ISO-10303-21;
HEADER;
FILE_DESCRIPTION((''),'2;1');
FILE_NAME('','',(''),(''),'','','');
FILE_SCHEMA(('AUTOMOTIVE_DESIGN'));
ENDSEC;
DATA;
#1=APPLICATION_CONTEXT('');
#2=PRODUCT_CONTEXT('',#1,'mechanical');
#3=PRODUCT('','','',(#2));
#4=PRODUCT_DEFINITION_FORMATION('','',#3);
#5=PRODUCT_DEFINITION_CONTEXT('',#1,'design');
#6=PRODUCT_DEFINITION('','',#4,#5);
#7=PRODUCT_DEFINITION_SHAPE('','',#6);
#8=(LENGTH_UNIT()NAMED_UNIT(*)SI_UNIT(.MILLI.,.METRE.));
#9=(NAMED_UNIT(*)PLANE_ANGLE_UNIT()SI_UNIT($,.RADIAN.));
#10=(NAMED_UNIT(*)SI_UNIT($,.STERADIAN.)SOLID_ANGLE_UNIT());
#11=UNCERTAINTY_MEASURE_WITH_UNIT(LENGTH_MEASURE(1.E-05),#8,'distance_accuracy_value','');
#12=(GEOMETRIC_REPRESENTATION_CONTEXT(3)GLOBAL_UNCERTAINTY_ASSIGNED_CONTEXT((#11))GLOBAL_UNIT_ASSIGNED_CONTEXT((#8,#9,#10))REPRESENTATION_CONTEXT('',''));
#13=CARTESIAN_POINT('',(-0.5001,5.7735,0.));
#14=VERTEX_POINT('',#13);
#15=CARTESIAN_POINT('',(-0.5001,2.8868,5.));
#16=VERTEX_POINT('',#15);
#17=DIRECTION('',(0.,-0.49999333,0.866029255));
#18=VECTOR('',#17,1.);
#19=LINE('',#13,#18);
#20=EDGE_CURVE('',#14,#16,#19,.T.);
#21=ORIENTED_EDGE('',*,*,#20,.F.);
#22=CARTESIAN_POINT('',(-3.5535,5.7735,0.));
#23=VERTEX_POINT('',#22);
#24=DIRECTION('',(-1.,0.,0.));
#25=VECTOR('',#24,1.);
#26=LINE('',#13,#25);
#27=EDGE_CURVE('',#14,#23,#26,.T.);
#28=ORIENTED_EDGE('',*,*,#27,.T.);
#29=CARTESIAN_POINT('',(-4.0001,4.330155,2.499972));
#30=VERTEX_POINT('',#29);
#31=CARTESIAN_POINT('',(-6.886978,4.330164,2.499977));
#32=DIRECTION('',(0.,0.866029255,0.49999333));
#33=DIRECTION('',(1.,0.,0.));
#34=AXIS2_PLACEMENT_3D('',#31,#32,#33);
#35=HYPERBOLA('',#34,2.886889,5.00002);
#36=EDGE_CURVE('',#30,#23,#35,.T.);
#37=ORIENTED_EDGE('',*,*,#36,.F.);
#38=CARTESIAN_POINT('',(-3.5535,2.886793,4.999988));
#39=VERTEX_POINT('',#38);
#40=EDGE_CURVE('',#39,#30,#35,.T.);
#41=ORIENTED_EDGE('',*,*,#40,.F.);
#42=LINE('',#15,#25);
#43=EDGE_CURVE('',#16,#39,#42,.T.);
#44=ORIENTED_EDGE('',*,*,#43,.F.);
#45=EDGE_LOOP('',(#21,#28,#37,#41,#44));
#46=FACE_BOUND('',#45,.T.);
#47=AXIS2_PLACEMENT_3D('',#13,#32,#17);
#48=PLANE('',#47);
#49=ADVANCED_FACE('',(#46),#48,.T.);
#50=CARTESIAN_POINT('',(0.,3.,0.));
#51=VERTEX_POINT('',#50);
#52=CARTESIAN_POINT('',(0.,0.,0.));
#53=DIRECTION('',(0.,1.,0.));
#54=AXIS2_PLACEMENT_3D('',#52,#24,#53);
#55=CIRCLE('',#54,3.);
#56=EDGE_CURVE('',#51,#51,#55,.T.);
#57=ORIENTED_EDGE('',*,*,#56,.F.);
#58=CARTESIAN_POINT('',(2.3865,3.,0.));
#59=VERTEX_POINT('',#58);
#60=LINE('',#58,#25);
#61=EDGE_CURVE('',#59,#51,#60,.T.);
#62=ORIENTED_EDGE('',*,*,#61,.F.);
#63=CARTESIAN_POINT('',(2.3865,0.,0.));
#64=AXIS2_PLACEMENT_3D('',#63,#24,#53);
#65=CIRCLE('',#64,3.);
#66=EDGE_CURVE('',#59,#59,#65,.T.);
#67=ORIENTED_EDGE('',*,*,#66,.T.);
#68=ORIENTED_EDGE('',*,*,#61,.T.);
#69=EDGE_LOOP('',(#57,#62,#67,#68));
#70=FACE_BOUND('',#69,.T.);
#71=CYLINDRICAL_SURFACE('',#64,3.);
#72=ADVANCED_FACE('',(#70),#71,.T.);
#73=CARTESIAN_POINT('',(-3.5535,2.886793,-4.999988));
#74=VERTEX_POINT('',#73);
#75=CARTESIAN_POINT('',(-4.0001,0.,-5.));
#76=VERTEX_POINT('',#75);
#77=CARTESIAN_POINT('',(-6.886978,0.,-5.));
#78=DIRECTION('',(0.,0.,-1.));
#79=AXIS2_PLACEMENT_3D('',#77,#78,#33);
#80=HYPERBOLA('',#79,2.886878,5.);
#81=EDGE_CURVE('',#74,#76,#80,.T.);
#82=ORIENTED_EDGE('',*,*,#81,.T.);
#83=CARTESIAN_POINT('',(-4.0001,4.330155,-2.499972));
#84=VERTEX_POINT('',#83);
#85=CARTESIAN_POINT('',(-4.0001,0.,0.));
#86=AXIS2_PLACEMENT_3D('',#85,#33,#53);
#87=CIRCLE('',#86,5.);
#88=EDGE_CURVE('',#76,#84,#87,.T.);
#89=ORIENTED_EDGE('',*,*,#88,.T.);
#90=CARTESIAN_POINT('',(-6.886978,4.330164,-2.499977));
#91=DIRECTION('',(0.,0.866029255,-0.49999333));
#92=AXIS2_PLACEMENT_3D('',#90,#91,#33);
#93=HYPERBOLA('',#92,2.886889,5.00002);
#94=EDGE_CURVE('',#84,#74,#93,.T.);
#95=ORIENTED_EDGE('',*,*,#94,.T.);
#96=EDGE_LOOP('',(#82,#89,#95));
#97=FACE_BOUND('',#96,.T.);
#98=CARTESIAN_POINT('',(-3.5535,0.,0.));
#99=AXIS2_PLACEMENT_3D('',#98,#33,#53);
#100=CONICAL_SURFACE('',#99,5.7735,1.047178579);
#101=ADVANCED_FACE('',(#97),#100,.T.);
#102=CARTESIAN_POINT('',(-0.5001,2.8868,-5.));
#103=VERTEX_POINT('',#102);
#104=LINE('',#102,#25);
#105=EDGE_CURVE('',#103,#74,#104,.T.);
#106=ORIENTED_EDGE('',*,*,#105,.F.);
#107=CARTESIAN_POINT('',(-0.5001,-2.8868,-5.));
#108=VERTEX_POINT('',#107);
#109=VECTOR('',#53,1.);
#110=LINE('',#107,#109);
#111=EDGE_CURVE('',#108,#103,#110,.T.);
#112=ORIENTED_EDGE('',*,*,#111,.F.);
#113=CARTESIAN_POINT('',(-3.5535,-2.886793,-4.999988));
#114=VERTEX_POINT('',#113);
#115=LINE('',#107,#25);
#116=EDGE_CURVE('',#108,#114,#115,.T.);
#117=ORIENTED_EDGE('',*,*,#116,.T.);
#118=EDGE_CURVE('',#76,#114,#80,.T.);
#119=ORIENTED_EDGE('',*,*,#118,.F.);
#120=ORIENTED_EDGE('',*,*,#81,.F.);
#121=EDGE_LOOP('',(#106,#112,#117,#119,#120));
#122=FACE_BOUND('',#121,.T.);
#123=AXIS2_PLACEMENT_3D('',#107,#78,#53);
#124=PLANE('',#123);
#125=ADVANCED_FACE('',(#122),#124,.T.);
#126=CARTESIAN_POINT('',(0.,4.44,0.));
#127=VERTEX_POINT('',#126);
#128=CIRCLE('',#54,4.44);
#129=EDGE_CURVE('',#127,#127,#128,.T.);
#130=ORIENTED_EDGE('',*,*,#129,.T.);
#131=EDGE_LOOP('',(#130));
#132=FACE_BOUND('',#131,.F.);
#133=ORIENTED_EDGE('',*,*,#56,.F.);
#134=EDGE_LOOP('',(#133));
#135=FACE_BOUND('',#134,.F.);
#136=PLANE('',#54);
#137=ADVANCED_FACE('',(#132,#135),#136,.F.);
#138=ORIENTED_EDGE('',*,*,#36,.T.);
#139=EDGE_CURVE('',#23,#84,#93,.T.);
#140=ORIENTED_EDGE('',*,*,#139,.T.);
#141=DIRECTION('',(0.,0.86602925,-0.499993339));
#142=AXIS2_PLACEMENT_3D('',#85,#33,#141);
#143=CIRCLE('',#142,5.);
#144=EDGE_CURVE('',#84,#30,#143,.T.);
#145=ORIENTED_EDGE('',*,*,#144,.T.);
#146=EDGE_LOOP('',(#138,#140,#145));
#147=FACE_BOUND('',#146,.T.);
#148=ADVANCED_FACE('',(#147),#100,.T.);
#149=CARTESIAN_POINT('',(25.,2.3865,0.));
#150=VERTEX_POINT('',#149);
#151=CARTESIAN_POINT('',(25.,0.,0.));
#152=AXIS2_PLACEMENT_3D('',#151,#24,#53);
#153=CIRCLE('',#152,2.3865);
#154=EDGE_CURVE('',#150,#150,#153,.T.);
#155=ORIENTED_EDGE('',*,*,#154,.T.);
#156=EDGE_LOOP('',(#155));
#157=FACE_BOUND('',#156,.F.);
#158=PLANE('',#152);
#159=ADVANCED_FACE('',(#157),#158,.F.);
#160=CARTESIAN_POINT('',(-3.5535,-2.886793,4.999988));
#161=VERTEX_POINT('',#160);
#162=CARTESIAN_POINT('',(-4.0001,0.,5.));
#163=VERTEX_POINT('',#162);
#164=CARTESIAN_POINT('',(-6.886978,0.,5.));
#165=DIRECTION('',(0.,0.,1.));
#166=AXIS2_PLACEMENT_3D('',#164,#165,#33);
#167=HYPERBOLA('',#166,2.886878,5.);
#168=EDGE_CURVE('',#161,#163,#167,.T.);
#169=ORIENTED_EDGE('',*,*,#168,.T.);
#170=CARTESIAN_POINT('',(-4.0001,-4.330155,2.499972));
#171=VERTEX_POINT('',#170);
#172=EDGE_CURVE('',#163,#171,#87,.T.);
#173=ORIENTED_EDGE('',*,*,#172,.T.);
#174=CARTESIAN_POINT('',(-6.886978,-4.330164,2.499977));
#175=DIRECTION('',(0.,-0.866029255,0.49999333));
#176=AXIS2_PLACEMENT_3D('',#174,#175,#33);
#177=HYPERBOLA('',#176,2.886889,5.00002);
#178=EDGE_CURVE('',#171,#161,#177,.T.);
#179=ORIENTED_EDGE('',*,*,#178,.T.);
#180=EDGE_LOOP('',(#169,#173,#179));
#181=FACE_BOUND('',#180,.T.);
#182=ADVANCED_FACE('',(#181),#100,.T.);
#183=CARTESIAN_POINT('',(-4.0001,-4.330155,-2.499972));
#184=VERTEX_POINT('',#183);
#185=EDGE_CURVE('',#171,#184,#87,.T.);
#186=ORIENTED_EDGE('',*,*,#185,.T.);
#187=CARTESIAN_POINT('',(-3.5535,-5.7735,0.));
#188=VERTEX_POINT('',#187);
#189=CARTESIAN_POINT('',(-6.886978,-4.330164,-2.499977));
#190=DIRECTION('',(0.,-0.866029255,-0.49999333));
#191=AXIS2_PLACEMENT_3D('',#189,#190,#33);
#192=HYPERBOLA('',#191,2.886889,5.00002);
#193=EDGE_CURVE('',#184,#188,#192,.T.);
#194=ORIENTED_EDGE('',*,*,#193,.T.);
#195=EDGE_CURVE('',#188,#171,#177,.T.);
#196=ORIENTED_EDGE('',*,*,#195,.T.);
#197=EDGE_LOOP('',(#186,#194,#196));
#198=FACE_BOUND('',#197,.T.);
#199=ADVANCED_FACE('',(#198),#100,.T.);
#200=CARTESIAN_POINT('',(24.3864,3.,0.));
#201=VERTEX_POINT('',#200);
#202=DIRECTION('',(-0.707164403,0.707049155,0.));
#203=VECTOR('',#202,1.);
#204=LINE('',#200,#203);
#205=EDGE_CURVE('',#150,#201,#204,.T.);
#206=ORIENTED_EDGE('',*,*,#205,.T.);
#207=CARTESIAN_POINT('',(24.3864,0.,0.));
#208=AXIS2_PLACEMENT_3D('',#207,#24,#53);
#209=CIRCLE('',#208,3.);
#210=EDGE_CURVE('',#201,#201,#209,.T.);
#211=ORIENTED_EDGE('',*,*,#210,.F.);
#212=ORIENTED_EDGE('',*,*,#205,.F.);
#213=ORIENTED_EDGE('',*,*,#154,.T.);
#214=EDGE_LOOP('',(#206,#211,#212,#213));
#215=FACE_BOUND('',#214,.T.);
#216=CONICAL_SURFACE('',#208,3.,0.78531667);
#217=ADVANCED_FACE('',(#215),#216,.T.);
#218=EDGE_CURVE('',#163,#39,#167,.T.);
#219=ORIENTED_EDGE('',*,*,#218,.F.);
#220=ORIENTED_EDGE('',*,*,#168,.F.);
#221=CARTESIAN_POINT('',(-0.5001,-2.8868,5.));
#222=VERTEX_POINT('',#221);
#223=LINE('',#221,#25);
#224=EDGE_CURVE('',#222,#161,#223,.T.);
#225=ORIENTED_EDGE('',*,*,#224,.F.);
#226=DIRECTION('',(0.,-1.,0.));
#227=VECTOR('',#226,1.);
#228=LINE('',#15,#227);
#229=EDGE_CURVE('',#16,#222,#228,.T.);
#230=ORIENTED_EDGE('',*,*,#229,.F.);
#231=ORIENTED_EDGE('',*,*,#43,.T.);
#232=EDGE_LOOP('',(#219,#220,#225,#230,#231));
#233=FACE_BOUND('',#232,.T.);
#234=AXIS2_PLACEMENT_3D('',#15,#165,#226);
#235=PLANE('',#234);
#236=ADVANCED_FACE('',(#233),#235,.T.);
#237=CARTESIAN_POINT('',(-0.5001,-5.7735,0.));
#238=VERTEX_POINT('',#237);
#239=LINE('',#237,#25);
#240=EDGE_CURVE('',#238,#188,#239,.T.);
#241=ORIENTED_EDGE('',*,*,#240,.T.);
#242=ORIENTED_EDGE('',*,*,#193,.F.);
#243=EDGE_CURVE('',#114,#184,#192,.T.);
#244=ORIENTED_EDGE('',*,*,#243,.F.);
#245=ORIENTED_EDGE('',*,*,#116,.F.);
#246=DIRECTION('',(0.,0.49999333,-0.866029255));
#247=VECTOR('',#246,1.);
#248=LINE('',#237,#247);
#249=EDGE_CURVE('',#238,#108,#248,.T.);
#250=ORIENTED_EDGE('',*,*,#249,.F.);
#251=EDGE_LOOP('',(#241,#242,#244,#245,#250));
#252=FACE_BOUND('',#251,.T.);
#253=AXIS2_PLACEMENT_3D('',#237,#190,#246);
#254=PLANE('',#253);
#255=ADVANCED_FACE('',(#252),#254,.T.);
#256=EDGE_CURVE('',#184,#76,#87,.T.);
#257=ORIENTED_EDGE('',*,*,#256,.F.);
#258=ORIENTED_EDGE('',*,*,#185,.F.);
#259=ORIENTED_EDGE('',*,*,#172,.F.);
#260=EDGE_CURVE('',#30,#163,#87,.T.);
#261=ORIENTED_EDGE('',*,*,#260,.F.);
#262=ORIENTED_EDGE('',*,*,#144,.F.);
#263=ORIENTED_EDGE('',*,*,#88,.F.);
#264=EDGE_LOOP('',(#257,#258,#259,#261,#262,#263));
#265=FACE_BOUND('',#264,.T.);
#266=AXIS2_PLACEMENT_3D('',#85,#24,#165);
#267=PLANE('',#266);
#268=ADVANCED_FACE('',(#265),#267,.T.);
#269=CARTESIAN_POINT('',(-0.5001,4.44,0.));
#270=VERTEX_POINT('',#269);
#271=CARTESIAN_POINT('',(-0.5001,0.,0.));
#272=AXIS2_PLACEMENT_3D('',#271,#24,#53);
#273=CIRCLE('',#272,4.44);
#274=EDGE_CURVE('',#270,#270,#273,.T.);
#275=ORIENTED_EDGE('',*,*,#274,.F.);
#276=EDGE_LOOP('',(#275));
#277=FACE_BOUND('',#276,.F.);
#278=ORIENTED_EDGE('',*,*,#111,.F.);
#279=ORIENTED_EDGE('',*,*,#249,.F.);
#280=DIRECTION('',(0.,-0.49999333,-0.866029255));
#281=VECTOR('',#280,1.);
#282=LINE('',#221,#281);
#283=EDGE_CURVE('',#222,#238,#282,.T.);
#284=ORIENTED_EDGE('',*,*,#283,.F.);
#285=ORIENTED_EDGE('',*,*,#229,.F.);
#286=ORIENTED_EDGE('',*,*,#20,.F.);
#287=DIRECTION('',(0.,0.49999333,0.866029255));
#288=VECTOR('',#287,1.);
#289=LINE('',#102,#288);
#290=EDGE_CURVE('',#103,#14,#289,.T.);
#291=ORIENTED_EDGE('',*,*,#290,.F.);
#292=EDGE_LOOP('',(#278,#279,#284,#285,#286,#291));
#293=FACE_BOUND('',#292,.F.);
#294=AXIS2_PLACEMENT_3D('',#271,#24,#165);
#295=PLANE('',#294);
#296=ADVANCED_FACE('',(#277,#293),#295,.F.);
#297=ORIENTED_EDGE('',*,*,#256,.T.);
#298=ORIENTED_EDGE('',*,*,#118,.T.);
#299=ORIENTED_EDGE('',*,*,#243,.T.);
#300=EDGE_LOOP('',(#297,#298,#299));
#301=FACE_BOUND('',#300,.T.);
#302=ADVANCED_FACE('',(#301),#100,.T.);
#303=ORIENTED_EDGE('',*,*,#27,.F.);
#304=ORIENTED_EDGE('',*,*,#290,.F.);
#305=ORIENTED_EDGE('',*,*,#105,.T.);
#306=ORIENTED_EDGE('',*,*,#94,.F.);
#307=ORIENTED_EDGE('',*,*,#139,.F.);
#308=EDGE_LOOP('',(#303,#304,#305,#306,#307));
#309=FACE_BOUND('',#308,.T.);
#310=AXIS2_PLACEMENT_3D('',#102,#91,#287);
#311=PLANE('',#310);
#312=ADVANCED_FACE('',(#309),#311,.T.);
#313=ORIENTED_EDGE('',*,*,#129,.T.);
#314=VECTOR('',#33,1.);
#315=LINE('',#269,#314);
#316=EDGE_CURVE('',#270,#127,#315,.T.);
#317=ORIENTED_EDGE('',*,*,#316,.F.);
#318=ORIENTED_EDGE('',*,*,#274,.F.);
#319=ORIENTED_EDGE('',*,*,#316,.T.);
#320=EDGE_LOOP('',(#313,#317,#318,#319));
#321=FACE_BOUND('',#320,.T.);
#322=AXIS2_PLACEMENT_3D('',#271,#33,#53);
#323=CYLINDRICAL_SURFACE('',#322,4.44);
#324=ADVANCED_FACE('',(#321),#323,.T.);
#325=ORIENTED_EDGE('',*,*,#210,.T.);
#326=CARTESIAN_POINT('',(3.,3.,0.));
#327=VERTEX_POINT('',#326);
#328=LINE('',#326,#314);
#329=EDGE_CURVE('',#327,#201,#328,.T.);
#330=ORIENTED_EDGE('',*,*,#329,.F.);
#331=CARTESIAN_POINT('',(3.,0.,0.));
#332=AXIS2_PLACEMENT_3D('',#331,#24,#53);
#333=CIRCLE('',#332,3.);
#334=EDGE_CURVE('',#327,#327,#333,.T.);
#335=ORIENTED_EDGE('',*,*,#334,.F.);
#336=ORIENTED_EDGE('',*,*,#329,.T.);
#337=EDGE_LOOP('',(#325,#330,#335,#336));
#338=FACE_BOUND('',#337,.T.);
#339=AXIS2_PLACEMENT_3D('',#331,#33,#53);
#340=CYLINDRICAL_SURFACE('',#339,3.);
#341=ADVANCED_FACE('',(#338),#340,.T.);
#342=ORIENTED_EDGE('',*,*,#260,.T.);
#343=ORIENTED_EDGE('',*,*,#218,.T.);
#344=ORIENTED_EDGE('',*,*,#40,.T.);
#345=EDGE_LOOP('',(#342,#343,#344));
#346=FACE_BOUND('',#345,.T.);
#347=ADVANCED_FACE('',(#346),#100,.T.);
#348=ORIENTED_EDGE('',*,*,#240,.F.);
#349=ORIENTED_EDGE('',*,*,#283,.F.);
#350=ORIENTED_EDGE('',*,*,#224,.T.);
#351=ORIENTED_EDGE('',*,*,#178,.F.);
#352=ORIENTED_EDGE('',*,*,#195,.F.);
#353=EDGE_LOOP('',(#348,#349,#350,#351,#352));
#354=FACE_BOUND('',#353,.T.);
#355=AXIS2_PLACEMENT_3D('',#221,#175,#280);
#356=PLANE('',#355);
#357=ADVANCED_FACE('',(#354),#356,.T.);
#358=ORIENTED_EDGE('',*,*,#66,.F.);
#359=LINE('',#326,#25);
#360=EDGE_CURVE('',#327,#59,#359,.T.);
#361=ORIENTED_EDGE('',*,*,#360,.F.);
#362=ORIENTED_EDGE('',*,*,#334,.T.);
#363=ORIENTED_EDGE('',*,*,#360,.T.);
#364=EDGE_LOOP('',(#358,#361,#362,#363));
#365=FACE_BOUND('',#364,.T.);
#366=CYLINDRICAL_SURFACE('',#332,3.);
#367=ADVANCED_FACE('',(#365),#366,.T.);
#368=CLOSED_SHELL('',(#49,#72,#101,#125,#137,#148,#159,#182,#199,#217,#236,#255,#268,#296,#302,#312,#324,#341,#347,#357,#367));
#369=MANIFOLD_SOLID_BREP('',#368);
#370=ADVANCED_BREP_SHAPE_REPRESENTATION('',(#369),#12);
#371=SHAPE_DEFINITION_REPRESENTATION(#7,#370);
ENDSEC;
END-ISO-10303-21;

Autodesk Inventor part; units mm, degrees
ref_plane "YZ Plane" through (0, 0, 0) normal (1, 0, 0) x (0, 1, 0)
ref_plane "XZ Plane" through (0, 0, 0) normal (0, 1, 0) x (-1, 0, 0)
sketch "Sketch1" plane through (0, 0, 0) normal (0, 0, 1) x (1, 0, 0)
  line L0 (0, 4.44) -> (0, 3)
  line L1 (3, 3) -> (25, 3)
  line L2 (25, 3) -> (25, 0)
  line L3 (25, 0) -> (-0.5001, 0)
  line L4 (-5.6001, 0) -> (30.1, 0) projected
  line L5 (-0.5001, 0) -> (-0.5001, 4.44)
  line L6 (-0.5001, 4.44) -> (0, 4.44)
  line L7 (3, 3) -> (2.3865, 3)
  line L8 (2.3865, 3) -> (0, 3)
  line L9 (0, -0.888) -> (0, 5.328) projected
  dimension "d0" = 25
  dimension "d1" = 22
  dimension "d2" = 6
  dimension "d9" = 0.5001
  dimension "d10" = 8.88
  dimension "d13" = 0.6136
  dimension "d14" = 6
revolve "Body" add sketch "Sketch1" angle 360 about axis through (25, 0, 0) along (-1, 0, 0)
sketch "Sketch2" plane through (-0.5001, 0, 0) normal (-1, 0, 0) x (0, 0, 1)
  line L0 (0, 5.7735) -> (5, 2.8868)
  line L1 (5, 2.8868) -> (5, -2.8868)
  line L2 (5, -2.8868) -> (0, -5.7735)
  line L3 (0, -5.7735) -> (-5, -2.8868)
  line L4 (-5, -2.8868) -> (-5, 2.8868)
  line L5 (-5, 2.8868) -> (0, 5.7735)
  point P0 (0, 0)
  point P1 (0, 0)
  dimension "d11" = 10
extrude "Head" add sketch "Sketch2" along normal blind 3.5
sketch "Sketch4" plane through (0, 0, 0) normal (0, 0, 1) x (1, 0, 0)
  line L0 (-4.0001, 5) -> (-4.0001, 5.7735)
  line L1 (-4.0001, 5.7735) -> (-3.5535, 5.7735)
  line L2 (-3.5535, 5.7735) -> (-4.0001, 5)
  line L3 (-4.7001, 0) -> (0.1999, 0) projected
  line L4 (-0.5001, 5.7735) -> (-4.0001, 5.7735) projected
  line L5 (-4.0001, 2.8868) -> (-4.0001, 5.7735) projected
  dimension "d5" = 30
  dimension "d19" = 10
revolve "Chamfer1" cut sketch "Sketch4" angle 360 about axis through (-10, 0, 0) along (1, 0, 0)
thread "Thread" size "M6x1" class "6g" standard "ISO Metric profile" length 22
chamfer "Chamfer2" distance 0.6135 distance2 0.6136 1 edges at (25, -3, 0) measured on face at (25, 0.7776, 0.4238)
ref_plane "Work Plane1" through (1.525, 0, 0) normal (0, 0, 1) x (1, 0, 0)
equation "\"d0\" = NLG"
equation "\"d1\" = GEL"
equation "\"d2\" = GD"
equation "\"d10\" = SD2"
equation "\"d14\" = BDM"
equation "\"d11\" = SW"
equation "\"d3\" = KOH - SD"
equation "\"d5\" = ANG1"
equation "\"d19\" = SW0"
equation "\"d15\" = GEL"
equation "\"d6\" = -0.5 * SPD + 0.5 * GD"
equation "\"NLG\" = 25"
equation "\"GD\" = NND"
equation "\"BDM\" = NND"
equation "\"KOH\" = 4"
equation "\"GEL\" = 22"
equation "\"SW\" = 10"
equation "\"SW0\" = SW"
equation "\"SPD\" = NND - 1.2269 * PTC"
equation "\"SD2\" = 8.88"
equation "\"SD\" = 0.5"
equation "\"ANG1\" = 30deg"
equation "\"GAL\" = 0.61345 * PTC"
equation "\"GUL\" = 0.61345 * PTC"
equation "\"RR\" = 0.25"
equation "\"GD1\" = THREADDIA - 1.2269 * PTC"
equation "\"THREADDIA\" = 6"
equation "\"SDH\" = SD2"
equation "\"SDHG\" = 3"
equation "\"TOA\" = 30deg"
equation "\"PTC\" = 1"
equation "\"NND\" = 6"
equation "\"E0\" = 11.55"
properties part number "ISO 4017 - M6 x 25(3)" material "Stainless Steel, 440C"
